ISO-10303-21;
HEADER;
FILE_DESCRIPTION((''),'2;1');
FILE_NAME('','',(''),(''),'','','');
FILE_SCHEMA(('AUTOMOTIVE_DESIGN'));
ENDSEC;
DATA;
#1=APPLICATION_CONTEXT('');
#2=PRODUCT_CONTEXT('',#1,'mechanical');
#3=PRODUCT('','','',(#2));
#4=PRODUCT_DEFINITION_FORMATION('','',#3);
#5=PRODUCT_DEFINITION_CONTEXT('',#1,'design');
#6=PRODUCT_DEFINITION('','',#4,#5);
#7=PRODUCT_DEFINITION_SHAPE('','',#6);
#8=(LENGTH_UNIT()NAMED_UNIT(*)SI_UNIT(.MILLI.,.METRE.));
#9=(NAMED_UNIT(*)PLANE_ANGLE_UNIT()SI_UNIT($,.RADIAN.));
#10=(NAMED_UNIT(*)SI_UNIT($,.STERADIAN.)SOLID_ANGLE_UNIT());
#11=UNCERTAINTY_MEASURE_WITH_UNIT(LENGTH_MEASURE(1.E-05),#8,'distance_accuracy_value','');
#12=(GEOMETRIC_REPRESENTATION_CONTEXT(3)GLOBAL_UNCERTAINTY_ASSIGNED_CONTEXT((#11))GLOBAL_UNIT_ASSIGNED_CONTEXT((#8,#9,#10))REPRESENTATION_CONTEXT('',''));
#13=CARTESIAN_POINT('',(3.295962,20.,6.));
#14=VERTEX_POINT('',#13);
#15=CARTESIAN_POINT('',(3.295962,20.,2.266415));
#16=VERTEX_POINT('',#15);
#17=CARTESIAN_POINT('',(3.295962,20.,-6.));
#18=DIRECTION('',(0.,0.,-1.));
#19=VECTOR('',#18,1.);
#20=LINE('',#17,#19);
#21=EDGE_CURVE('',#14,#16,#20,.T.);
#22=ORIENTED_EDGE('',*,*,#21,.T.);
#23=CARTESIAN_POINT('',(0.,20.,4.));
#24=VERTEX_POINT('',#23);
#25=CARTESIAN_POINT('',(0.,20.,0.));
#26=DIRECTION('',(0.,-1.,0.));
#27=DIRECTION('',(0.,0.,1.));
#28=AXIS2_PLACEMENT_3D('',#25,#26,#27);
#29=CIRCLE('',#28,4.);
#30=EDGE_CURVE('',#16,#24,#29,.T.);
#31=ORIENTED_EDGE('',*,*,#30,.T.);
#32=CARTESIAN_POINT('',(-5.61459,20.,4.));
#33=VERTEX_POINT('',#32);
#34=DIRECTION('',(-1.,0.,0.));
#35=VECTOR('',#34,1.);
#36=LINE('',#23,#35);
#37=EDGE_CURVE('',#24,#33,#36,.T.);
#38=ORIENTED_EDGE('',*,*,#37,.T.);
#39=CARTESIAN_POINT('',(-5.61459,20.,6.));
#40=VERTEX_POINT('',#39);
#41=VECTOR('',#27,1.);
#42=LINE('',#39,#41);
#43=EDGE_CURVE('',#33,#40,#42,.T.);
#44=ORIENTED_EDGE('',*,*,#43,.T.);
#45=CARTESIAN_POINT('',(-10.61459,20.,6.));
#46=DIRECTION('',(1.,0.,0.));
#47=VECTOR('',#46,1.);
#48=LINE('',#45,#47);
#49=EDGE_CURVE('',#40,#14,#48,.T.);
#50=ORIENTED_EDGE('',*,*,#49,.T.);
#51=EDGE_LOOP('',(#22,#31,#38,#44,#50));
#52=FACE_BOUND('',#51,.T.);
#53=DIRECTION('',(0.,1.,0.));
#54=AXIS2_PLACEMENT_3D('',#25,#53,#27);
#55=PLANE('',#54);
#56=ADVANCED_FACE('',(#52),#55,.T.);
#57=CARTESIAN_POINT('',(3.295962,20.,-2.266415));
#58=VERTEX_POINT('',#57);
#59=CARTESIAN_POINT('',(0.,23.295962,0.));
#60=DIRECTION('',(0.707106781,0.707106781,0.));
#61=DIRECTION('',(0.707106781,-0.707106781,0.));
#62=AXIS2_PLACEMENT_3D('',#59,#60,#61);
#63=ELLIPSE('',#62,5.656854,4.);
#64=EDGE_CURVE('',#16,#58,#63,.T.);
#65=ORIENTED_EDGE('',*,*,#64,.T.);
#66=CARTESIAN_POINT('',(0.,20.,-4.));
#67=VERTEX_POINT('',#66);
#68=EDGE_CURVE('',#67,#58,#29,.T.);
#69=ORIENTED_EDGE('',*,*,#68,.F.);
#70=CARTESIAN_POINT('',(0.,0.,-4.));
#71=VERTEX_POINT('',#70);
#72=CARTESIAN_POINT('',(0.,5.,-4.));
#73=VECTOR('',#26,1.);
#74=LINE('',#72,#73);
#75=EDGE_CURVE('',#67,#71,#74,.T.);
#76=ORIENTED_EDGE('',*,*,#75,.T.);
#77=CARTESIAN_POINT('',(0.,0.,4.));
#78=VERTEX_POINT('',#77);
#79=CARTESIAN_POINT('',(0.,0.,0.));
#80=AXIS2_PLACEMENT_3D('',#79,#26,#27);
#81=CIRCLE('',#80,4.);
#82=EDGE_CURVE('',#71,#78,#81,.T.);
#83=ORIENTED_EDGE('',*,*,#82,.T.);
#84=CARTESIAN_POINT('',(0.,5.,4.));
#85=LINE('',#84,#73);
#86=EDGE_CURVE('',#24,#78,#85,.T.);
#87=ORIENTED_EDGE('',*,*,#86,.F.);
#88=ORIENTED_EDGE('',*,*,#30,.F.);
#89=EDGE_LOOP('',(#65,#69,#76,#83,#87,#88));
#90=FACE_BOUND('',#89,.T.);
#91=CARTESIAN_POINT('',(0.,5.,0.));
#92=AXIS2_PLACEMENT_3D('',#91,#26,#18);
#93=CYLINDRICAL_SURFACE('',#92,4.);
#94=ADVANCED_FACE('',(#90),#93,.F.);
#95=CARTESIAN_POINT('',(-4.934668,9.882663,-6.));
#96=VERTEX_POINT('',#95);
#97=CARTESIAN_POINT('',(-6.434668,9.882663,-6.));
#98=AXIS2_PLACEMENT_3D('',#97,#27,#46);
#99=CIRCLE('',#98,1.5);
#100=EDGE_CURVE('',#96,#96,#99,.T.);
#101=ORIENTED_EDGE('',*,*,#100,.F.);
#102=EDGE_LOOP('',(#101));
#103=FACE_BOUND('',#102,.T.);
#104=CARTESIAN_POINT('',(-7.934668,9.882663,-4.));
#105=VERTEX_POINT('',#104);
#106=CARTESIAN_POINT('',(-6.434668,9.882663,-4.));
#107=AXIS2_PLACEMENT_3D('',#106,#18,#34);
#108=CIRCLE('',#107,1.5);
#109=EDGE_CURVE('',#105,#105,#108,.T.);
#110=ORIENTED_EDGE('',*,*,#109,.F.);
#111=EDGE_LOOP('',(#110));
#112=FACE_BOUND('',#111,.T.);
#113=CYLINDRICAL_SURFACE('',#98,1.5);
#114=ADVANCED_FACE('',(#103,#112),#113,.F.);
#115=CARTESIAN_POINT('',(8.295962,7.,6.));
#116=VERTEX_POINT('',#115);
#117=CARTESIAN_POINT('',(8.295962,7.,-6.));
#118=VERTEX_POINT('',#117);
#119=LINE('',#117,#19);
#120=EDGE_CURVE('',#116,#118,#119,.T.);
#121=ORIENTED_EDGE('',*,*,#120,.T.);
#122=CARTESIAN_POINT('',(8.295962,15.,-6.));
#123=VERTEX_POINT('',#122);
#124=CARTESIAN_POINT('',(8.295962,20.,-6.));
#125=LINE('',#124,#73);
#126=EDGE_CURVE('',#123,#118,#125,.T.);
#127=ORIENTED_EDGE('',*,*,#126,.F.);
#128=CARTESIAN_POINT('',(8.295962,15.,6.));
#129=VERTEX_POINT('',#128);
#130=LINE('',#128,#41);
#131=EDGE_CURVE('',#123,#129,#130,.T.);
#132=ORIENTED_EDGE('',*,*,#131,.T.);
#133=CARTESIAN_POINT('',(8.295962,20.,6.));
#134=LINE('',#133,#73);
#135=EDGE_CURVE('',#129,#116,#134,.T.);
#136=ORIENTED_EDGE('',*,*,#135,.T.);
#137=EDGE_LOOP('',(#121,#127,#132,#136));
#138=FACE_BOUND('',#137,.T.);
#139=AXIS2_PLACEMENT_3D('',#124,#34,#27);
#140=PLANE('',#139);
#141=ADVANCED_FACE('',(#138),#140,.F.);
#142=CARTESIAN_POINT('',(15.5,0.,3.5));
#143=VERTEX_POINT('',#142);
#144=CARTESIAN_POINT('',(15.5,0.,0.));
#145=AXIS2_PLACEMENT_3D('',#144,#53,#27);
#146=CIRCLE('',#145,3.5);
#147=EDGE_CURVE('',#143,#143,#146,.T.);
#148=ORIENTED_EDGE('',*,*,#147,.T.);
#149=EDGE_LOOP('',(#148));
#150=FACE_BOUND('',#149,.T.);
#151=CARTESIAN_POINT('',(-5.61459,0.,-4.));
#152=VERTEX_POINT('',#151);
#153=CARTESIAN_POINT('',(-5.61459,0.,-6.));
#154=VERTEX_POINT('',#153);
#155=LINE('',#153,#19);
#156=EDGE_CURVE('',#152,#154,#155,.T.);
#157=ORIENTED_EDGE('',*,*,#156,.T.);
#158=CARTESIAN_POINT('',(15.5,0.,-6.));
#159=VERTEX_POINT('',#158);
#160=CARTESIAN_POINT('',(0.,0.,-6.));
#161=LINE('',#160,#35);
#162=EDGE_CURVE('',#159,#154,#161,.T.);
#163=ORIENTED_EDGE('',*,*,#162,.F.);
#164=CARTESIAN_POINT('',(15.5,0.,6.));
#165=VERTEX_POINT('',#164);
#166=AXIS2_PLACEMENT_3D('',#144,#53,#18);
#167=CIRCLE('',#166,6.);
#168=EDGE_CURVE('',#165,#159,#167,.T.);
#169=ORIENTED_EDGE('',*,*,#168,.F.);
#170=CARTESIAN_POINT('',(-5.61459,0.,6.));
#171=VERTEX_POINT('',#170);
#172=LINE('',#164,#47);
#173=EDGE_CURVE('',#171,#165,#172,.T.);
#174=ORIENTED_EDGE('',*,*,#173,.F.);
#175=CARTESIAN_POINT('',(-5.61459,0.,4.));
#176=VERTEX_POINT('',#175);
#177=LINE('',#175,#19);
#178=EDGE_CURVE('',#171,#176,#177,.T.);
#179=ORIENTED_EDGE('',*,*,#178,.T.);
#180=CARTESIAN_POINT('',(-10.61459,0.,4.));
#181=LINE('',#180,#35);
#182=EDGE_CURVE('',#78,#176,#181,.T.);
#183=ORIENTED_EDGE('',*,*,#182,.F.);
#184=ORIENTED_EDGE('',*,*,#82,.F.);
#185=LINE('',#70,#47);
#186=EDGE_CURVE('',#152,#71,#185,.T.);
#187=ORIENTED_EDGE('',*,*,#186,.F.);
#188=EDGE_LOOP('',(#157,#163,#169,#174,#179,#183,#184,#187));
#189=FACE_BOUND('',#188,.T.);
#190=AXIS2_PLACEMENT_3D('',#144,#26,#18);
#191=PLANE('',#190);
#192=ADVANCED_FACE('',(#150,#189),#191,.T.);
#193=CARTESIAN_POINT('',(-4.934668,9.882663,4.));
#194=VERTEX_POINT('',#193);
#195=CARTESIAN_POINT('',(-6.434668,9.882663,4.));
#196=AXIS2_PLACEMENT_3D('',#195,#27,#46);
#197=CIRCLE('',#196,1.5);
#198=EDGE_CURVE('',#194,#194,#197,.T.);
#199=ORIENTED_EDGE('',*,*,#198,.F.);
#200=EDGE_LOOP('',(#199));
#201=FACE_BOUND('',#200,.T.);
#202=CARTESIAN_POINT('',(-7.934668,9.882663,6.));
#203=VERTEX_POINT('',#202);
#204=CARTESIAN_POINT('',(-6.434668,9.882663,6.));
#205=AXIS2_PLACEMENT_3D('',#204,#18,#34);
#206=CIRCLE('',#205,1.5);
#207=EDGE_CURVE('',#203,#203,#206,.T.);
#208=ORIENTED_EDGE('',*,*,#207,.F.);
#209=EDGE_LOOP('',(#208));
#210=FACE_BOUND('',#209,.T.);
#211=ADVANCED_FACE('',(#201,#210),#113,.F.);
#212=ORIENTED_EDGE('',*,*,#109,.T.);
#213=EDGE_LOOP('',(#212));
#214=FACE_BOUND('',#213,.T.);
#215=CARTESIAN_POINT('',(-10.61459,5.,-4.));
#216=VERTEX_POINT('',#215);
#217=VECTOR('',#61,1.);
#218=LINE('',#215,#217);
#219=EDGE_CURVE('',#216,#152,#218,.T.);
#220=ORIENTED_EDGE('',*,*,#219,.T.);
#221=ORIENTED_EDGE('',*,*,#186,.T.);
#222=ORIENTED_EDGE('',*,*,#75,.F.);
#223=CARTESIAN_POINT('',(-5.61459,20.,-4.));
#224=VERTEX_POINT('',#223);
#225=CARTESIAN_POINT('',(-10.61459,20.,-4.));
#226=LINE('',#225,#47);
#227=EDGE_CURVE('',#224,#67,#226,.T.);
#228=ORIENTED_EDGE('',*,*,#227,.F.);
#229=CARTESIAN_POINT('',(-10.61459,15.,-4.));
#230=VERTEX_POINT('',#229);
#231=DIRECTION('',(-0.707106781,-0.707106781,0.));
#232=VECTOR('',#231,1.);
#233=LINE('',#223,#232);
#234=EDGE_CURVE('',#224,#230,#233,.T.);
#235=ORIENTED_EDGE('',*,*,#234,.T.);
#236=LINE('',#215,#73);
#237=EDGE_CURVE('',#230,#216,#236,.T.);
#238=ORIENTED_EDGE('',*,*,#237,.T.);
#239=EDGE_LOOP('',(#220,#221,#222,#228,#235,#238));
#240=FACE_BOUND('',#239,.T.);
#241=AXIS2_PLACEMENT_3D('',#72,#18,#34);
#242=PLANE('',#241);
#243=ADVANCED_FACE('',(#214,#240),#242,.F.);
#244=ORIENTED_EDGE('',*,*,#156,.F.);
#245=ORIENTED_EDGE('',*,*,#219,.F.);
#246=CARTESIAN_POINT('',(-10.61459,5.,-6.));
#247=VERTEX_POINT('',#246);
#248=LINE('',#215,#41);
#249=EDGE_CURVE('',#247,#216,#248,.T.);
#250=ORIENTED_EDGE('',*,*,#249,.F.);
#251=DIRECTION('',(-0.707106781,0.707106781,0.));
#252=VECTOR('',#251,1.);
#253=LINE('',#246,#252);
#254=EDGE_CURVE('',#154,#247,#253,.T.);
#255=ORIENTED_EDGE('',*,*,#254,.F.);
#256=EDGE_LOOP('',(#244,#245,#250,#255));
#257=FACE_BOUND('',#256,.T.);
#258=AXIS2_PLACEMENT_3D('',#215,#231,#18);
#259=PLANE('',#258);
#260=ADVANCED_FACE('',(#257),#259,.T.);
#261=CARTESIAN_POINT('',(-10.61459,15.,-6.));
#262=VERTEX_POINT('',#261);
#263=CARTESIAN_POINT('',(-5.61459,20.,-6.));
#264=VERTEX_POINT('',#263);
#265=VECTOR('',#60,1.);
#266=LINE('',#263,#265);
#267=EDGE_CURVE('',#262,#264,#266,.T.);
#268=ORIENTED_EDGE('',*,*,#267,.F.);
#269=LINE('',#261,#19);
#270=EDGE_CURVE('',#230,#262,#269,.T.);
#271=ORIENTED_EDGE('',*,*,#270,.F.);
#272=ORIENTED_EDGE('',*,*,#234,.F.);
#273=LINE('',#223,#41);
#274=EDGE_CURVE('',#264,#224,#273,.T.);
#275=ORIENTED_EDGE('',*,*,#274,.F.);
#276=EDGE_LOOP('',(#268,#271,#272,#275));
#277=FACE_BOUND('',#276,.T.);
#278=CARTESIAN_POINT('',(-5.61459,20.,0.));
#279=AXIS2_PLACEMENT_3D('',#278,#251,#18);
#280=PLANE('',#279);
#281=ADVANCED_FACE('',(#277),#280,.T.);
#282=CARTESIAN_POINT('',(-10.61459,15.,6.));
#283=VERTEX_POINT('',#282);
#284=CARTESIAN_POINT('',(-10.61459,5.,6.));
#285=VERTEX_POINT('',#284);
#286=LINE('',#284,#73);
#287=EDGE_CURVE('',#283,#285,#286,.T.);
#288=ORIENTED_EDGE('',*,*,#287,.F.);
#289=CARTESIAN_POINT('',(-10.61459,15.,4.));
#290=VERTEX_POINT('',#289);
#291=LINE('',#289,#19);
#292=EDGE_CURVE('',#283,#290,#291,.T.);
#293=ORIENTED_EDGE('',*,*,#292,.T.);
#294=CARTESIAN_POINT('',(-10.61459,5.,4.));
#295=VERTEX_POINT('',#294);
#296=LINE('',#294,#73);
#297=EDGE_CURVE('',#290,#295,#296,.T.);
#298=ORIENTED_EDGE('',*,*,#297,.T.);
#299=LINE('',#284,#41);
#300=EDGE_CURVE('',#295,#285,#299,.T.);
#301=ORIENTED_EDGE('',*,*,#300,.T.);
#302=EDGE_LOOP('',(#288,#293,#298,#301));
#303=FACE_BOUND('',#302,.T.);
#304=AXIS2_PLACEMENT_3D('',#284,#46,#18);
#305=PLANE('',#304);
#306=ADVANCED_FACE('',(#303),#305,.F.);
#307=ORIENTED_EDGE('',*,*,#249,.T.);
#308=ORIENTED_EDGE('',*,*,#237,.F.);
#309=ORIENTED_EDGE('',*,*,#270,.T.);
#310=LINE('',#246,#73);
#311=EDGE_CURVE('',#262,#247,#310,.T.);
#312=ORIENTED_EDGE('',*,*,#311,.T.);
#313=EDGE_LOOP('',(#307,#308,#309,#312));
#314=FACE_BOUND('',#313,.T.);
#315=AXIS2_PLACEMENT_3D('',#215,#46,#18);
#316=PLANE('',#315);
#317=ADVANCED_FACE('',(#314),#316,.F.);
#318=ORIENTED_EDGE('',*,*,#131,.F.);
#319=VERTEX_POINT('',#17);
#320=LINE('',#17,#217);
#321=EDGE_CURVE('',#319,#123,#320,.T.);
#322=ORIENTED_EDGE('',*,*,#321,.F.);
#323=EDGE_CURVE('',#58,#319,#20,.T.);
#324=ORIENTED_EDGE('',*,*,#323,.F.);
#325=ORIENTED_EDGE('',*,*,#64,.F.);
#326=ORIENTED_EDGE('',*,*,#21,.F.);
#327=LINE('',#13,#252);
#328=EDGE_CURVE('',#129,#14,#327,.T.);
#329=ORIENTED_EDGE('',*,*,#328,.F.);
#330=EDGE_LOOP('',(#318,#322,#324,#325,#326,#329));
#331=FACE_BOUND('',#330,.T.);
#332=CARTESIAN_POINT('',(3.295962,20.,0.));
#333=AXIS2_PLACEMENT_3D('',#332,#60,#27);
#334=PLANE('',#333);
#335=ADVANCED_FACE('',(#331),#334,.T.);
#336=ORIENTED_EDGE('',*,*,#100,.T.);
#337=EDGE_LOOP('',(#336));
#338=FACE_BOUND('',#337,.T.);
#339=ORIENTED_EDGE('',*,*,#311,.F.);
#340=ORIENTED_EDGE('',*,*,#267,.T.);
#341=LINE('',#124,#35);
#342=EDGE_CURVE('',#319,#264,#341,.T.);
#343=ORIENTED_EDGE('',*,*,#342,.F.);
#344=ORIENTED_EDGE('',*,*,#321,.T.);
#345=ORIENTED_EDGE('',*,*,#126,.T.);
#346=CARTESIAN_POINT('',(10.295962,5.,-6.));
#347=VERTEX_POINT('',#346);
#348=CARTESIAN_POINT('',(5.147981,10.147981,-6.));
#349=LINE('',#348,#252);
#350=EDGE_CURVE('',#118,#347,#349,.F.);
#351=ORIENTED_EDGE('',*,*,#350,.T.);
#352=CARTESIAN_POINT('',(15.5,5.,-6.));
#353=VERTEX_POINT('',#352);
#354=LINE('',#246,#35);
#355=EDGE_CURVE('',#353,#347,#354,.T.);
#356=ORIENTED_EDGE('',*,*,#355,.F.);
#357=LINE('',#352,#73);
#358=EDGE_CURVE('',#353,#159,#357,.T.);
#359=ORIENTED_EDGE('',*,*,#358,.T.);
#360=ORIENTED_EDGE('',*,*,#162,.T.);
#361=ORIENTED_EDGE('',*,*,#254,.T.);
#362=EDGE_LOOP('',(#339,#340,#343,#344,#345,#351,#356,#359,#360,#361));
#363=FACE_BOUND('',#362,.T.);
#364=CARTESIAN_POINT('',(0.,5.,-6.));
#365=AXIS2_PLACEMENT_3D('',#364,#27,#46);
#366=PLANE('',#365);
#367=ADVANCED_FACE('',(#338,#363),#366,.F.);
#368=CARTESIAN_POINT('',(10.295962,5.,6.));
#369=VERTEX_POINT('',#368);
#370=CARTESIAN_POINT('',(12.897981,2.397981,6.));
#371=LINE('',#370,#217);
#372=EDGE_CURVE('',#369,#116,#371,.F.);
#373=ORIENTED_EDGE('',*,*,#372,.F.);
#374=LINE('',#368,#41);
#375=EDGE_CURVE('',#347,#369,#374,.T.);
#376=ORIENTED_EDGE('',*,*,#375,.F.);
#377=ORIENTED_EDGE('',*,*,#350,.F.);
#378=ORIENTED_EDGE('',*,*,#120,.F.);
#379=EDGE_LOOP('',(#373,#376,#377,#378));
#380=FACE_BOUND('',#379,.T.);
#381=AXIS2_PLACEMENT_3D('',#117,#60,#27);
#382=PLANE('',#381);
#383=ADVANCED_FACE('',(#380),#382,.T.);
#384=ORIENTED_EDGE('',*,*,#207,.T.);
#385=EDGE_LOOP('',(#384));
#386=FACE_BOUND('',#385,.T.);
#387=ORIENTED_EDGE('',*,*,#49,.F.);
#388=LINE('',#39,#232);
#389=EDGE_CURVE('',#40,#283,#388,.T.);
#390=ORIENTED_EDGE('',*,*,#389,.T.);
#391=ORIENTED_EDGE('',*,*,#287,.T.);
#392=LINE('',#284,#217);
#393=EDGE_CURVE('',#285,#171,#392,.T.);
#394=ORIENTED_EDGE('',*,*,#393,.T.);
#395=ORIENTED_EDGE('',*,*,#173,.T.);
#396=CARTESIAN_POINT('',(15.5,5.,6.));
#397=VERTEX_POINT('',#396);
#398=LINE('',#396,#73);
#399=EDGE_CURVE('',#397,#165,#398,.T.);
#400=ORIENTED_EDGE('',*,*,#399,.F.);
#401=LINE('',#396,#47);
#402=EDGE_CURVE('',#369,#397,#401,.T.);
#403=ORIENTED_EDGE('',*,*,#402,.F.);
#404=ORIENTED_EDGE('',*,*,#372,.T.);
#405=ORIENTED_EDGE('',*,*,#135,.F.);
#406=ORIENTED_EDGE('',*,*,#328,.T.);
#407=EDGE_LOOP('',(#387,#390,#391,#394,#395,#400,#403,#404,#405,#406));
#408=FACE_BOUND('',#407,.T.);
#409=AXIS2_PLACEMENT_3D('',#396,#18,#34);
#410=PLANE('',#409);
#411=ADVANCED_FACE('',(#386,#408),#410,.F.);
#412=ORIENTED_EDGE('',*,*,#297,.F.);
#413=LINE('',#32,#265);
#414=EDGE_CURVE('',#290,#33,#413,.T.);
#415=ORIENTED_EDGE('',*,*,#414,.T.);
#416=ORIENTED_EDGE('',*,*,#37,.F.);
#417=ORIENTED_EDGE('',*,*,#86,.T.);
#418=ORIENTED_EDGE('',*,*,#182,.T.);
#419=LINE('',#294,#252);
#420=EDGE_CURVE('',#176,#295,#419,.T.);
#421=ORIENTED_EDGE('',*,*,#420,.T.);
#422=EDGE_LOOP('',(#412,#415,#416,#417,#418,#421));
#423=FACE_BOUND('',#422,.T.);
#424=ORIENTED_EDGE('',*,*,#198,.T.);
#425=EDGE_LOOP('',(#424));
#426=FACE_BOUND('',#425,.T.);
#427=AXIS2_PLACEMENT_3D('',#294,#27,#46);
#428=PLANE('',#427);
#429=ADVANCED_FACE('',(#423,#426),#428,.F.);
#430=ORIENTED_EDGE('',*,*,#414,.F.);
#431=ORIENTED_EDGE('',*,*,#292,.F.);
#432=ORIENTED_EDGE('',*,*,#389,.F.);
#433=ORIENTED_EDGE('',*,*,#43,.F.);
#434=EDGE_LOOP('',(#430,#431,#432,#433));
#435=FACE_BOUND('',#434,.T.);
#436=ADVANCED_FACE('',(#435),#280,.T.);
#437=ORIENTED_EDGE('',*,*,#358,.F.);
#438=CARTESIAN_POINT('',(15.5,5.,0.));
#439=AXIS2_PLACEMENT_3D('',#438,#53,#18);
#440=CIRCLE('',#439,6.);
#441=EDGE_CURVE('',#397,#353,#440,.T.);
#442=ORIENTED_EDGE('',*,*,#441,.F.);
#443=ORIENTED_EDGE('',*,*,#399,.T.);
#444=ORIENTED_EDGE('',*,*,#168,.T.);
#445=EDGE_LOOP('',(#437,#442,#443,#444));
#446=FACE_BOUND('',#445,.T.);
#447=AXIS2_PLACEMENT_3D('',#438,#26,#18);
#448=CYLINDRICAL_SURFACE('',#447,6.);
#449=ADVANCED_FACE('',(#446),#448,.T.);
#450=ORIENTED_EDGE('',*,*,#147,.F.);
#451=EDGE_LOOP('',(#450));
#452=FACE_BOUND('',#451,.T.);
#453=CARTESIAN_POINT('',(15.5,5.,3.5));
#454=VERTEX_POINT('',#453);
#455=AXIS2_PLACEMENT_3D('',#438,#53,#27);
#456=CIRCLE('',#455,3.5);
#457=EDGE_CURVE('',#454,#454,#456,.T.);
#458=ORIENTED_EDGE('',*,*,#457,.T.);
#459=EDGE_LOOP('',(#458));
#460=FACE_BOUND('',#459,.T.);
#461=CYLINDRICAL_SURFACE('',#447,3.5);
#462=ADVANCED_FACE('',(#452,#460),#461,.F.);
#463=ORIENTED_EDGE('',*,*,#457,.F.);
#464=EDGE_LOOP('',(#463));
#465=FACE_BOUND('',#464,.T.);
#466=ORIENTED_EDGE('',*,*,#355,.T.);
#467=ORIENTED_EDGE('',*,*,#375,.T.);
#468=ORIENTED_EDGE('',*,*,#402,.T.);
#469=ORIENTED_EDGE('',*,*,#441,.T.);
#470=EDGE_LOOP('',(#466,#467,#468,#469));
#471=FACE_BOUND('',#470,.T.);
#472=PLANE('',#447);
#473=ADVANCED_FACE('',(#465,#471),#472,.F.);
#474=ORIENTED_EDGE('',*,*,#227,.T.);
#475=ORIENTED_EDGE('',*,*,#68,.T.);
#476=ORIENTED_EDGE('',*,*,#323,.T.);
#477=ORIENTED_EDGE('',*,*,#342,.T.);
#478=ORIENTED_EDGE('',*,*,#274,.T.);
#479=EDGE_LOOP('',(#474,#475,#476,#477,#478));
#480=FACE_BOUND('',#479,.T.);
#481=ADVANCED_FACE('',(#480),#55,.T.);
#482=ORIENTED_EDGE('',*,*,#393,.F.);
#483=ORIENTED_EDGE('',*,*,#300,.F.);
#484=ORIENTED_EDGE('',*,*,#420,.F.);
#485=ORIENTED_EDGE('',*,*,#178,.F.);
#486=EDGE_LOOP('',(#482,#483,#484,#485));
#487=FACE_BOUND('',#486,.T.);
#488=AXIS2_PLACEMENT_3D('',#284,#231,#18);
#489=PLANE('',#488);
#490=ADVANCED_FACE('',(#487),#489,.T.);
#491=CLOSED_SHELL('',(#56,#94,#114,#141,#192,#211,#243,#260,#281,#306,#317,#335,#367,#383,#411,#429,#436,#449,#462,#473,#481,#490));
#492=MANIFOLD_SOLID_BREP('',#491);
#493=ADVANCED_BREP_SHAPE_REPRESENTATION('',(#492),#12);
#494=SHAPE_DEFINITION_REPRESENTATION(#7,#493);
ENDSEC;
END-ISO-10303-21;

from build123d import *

# Parameters (mm, degrees)
SKETCH1_R               = 3.5
BOSS_EXTRUDE1_DEPTH     = 5
BOSS_EXTRUDE2_DEPTH     = 15
CHAMFER1_SIZE           = 5
CHAMFER2_SIZE           = 5
CUT_EXTRUDE1_DEPTH      = 32.721443851
CUT_EXTRUDE1_DEPTH_BACK = 32.721443851
SKETCH3_R               = 1.5
CHAMFER3_SIZE           = 2


with BuildPart() as part:
    # Sketch1 → Boss-Extrude1 (new body)
    with BuildSketch(Plane(origin=(0, 0, 0), x_dir=(1, 0, 0), z_dir=(0, 1, 0))):
        with BuildLine():
            Line((0, 6), (15.5, 6))
            ThreePointArc((15.5, 6), (21.5, 0), (15.5, -6))
            Line((15.5, -6), (-10.614590388, -6))
            Line((-10.614590388, -6), (-10.614590388, -4))
            Line((-10.614590388, -4), (0, -4))
            ThreePointArc((0, -4), (4, 0), (0, 4))
            Line((0, 4), (-10.614590388, 4))
            Line((-10.614590388, 4), (-10.614590388, 6))
            Line((-10.614590388, 6), (0, 6))
        make_face()
        with Locations(Location((15.5, 0, 0), (0, 0, 270))):
            Circle(SKETCH1_R, mode=Mode.SUBTRACT)
    extrude(amount=BOSS_EXTRUDE1_DEPTH)

    # Sketch2 → Boss-Extrude2 (add)
    with BuildSketch(Plane(origin=(0, 5, 0), x_dir=(1, 0, 0), z_dir=(0, 1, 0))):
        with BuildLine():
            Line((8.295961618, 6), (8.295961618, -6))
            Line((8.295961618, -6), (-10.614590388, -6))
            Line((-10.614590388, -6), (-10.614590388, -4))
            Line((-10.614590388, -4), (0, -4))
            ThreePointArc((0, -4), (4, 0), (0, 4))
            Line((0, 4), (-10.614590388, 4))
            Line((-10.614590388, 4), (-10.614590388, 6))
            Line((-10.614590388, 6), (8.295961618, 6))
        make_face()
    extrude(amount=BOSS_EXTRUDE2_DEPTH)

    # Chamfer1
    # the kernel refuses this chamfer: 5 mm, written as the material it takes off along each edge
    with BuildSketch(Plane(origin=(8.295961618, 20, -18.85841494), x_dir=(0.027495876610586317, -0.9996219169112968, 0), z_dir=(0, 0, 1))) as chamfer1_piece_1:
        Polygon((CHAMFER1_SIZE * 0.999621916911, -CHAMFER1_SIZE * 0.0274958766106), (-CHAMFER1_SIZE * 0.0274958766106, -CHAMFER1_SIZE * 0.999621916911), (0, 0), align=None)
    extrude(amount=37.71682988, mode=Mode.SUBTRACT)

    # Chamfer2
    chamfer2_edges = [part.edges().sort_by_distance(p)[0] for p in [
        (-10.614590388, 0, -5),
        (-10.614590388, 20, -5),
        (-10.614590388, 20, 5),
        (-10.614590388, 0, 5),
    ]]
    chamfer(chamfer2_edges, length=CHAMFER2_SIZE)

    # Sketch3 → Cut-Extrude1 (cut, two sides: drawn at the far end of the back side and taken through both)
    with BuildSketch(Plane.XY.offset(6).offset(-CUT_EXTRUDE1_DEPTH_BACK)):
        with Locations((-6.434668113, 9.88266285)):
            Circle(SKETCH3_R)
    extrude(amount=CUT_EXTRUDE1_DEPTH + CUT_EXTRUDE1_DEPTH_BACK, mode=Mode.SUBTRACT)

    # Chamfer3
    chamfer3_edges = [part.edges().sort_by_distance(p)[0] for p in [
        (8.295961618, 5, 0),
    ]]
    chamfer(chamfer3_edges, length=CHAMFER3_SIZE)


solid = part.part
